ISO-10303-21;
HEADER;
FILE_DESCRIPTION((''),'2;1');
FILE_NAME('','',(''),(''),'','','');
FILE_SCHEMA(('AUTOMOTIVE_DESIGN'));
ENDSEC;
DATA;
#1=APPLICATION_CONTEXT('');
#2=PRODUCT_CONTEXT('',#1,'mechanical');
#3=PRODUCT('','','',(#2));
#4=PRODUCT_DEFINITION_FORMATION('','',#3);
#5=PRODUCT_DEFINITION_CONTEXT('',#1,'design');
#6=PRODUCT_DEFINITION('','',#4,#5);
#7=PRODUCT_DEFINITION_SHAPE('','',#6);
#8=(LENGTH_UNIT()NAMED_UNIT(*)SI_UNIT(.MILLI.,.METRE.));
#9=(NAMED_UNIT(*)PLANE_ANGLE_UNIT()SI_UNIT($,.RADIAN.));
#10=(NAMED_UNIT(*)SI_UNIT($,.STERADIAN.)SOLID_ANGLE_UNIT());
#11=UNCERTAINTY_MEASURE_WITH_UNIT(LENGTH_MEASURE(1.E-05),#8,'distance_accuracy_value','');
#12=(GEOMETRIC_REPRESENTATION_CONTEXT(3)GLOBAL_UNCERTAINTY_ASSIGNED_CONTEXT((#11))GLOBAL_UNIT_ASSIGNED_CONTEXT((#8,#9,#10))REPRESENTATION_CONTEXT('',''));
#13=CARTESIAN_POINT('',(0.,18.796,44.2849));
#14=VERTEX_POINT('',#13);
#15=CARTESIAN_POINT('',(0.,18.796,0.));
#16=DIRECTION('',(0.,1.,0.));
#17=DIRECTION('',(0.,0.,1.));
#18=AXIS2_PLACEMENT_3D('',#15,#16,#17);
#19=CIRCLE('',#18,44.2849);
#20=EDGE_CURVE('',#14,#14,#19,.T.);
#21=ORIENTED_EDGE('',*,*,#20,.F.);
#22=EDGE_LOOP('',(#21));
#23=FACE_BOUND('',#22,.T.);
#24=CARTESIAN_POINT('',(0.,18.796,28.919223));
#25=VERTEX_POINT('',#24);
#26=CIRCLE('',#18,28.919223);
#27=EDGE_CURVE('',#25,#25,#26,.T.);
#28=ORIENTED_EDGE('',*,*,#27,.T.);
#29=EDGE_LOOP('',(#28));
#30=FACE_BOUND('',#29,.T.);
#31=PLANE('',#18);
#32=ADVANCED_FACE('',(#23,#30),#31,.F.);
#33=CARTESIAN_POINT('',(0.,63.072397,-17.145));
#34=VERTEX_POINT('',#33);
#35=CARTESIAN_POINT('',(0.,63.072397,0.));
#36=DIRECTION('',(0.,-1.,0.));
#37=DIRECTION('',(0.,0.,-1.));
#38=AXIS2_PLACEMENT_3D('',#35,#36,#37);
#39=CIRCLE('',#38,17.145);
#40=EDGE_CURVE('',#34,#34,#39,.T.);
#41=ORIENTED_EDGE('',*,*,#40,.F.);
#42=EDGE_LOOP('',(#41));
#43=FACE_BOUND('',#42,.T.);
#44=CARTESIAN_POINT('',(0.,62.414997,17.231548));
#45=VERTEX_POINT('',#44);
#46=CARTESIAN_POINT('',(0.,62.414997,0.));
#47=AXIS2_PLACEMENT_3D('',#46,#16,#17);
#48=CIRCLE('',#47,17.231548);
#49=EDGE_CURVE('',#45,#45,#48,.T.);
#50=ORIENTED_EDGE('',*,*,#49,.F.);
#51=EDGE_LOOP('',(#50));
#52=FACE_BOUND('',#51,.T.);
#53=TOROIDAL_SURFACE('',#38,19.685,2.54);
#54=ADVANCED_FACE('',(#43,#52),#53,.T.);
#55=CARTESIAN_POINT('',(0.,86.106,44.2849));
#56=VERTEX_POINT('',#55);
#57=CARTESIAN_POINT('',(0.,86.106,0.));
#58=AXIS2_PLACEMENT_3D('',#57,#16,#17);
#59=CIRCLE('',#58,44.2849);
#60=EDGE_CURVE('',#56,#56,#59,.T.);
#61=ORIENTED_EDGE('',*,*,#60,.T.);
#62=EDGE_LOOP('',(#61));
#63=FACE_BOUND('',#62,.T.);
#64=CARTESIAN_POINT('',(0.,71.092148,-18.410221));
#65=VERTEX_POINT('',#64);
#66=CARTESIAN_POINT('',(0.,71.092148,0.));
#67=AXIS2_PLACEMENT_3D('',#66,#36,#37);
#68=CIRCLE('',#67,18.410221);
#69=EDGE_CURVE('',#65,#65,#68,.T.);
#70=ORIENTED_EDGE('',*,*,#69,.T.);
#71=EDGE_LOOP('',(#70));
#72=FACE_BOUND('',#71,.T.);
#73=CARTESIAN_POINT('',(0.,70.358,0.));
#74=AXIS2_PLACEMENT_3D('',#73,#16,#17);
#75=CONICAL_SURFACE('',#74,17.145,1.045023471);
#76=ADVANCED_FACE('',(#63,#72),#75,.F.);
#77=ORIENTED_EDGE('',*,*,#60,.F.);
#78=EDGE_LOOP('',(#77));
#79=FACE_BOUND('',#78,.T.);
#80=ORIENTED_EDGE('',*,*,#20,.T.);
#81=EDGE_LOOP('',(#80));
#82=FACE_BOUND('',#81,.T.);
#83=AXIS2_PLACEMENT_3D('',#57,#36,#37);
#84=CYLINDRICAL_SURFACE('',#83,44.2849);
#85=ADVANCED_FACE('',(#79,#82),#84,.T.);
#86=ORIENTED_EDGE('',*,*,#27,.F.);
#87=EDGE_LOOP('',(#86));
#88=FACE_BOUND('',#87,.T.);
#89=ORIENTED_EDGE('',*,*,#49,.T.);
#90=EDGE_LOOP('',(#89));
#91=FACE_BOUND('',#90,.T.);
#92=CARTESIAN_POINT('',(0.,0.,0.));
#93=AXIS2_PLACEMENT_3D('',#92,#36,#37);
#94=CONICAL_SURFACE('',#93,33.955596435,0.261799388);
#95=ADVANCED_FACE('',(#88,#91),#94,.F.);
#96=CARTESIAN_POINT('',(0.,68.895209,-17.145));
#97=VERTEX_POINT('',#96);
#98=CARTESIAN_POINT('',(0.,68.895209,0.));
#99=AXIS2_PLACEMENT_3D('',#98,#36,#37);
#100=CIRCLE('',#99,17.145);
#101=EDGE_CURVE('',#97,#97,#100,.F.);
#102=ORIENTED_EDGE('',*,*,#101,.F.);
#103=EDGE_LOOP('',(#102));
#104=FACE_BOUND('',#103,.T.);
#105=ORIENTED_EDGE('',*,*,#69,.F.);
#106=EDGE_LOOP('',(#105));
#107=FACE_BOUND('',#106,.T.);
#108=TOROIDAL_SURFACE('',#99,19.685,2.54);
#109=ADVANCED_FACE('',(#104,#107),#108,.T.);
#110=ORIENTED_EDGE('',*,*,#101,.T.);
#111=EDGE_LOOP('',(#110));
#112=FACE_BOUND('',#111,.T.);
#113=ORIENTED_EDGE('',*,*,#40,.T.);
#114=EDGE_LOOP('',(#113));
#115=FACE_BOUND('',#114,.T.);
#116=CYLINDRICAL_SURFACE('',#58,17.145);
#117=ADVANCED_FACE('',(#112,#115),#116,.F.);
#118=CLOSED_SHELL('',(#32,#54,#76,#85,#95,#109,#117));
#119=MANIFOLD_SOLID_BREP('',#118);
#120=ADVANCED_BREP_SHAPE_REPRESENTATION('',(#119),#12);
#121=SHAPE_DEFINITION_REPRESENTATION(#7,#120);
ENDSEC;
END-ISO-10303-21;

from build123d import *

# Parameters (mm, degrees)
SKETCH1_R            = 44.2849
BOSS_EXTRUDE1_DEPTH  = 86.106
FILLET1_R            = 2.54
MOVE_FACE1_OUTLINE_R = 44.2849
MOVE_FACE1_DEPTH     = 18.796


# Read off the part's stored shape, not the designer's step: Move Face1
with BuildPart() as part:
    # Sketch1 → Boss-Extrude1 (new body)
    with BuildSketch(Plane(origin=(0, 0, 0), x_dir=(1, 0, 0), z_dir=(0, 1, 0))):
        with Locations(Location((0, 0, 0), (0, 0, 270))):
            Circle(SKETCH1_R)
    extrude(amount=BOSS_EXTRUDE1_DEPTH)

    # Sketch2 → Cut-Revolve1 (revolve, cut)
    with BuildSketch(Plane.XY, mode=Mode.PRIVATE) as cut_revolve1_sk:
        Polygon((17.145, 70.358), (17.145, 62.738), (33.955596435, 0), (0, 0), (0, 86.106), (44.2849, 86.106), align=None)
    revolve(cut_revolve1_sk.sketch.rotate(Axis((0, 86.106, 0), (0, -1, 0)), 90), axis=Axis((0, 86.106, 0), (0, -1, 0)), mode=Mode.SUBTRACT)

    # Fillet1
    fillet1_edges = [part.edges().sort_by_distance(p)[0] for p in [
        (0, 70.358, -17.145),
        (0, 62.738, -17.145),
    ]]
    fillet(fillet1_edges, radius=FILLET1_R)

    # Move Face1 outline → Move Face1 (cut)
    with BuildSketch(Plane(origin=(0, 0, 0), x_dir=(1, 0, 0), z_dir=(0, 1, 0))):
        Circle(MOVE_FACE1_OUTLINE_R)
    extrude(amount=MOVE_FACE1_DEPTH, mode=Mode.SUBTRACT)


solid = part.part
